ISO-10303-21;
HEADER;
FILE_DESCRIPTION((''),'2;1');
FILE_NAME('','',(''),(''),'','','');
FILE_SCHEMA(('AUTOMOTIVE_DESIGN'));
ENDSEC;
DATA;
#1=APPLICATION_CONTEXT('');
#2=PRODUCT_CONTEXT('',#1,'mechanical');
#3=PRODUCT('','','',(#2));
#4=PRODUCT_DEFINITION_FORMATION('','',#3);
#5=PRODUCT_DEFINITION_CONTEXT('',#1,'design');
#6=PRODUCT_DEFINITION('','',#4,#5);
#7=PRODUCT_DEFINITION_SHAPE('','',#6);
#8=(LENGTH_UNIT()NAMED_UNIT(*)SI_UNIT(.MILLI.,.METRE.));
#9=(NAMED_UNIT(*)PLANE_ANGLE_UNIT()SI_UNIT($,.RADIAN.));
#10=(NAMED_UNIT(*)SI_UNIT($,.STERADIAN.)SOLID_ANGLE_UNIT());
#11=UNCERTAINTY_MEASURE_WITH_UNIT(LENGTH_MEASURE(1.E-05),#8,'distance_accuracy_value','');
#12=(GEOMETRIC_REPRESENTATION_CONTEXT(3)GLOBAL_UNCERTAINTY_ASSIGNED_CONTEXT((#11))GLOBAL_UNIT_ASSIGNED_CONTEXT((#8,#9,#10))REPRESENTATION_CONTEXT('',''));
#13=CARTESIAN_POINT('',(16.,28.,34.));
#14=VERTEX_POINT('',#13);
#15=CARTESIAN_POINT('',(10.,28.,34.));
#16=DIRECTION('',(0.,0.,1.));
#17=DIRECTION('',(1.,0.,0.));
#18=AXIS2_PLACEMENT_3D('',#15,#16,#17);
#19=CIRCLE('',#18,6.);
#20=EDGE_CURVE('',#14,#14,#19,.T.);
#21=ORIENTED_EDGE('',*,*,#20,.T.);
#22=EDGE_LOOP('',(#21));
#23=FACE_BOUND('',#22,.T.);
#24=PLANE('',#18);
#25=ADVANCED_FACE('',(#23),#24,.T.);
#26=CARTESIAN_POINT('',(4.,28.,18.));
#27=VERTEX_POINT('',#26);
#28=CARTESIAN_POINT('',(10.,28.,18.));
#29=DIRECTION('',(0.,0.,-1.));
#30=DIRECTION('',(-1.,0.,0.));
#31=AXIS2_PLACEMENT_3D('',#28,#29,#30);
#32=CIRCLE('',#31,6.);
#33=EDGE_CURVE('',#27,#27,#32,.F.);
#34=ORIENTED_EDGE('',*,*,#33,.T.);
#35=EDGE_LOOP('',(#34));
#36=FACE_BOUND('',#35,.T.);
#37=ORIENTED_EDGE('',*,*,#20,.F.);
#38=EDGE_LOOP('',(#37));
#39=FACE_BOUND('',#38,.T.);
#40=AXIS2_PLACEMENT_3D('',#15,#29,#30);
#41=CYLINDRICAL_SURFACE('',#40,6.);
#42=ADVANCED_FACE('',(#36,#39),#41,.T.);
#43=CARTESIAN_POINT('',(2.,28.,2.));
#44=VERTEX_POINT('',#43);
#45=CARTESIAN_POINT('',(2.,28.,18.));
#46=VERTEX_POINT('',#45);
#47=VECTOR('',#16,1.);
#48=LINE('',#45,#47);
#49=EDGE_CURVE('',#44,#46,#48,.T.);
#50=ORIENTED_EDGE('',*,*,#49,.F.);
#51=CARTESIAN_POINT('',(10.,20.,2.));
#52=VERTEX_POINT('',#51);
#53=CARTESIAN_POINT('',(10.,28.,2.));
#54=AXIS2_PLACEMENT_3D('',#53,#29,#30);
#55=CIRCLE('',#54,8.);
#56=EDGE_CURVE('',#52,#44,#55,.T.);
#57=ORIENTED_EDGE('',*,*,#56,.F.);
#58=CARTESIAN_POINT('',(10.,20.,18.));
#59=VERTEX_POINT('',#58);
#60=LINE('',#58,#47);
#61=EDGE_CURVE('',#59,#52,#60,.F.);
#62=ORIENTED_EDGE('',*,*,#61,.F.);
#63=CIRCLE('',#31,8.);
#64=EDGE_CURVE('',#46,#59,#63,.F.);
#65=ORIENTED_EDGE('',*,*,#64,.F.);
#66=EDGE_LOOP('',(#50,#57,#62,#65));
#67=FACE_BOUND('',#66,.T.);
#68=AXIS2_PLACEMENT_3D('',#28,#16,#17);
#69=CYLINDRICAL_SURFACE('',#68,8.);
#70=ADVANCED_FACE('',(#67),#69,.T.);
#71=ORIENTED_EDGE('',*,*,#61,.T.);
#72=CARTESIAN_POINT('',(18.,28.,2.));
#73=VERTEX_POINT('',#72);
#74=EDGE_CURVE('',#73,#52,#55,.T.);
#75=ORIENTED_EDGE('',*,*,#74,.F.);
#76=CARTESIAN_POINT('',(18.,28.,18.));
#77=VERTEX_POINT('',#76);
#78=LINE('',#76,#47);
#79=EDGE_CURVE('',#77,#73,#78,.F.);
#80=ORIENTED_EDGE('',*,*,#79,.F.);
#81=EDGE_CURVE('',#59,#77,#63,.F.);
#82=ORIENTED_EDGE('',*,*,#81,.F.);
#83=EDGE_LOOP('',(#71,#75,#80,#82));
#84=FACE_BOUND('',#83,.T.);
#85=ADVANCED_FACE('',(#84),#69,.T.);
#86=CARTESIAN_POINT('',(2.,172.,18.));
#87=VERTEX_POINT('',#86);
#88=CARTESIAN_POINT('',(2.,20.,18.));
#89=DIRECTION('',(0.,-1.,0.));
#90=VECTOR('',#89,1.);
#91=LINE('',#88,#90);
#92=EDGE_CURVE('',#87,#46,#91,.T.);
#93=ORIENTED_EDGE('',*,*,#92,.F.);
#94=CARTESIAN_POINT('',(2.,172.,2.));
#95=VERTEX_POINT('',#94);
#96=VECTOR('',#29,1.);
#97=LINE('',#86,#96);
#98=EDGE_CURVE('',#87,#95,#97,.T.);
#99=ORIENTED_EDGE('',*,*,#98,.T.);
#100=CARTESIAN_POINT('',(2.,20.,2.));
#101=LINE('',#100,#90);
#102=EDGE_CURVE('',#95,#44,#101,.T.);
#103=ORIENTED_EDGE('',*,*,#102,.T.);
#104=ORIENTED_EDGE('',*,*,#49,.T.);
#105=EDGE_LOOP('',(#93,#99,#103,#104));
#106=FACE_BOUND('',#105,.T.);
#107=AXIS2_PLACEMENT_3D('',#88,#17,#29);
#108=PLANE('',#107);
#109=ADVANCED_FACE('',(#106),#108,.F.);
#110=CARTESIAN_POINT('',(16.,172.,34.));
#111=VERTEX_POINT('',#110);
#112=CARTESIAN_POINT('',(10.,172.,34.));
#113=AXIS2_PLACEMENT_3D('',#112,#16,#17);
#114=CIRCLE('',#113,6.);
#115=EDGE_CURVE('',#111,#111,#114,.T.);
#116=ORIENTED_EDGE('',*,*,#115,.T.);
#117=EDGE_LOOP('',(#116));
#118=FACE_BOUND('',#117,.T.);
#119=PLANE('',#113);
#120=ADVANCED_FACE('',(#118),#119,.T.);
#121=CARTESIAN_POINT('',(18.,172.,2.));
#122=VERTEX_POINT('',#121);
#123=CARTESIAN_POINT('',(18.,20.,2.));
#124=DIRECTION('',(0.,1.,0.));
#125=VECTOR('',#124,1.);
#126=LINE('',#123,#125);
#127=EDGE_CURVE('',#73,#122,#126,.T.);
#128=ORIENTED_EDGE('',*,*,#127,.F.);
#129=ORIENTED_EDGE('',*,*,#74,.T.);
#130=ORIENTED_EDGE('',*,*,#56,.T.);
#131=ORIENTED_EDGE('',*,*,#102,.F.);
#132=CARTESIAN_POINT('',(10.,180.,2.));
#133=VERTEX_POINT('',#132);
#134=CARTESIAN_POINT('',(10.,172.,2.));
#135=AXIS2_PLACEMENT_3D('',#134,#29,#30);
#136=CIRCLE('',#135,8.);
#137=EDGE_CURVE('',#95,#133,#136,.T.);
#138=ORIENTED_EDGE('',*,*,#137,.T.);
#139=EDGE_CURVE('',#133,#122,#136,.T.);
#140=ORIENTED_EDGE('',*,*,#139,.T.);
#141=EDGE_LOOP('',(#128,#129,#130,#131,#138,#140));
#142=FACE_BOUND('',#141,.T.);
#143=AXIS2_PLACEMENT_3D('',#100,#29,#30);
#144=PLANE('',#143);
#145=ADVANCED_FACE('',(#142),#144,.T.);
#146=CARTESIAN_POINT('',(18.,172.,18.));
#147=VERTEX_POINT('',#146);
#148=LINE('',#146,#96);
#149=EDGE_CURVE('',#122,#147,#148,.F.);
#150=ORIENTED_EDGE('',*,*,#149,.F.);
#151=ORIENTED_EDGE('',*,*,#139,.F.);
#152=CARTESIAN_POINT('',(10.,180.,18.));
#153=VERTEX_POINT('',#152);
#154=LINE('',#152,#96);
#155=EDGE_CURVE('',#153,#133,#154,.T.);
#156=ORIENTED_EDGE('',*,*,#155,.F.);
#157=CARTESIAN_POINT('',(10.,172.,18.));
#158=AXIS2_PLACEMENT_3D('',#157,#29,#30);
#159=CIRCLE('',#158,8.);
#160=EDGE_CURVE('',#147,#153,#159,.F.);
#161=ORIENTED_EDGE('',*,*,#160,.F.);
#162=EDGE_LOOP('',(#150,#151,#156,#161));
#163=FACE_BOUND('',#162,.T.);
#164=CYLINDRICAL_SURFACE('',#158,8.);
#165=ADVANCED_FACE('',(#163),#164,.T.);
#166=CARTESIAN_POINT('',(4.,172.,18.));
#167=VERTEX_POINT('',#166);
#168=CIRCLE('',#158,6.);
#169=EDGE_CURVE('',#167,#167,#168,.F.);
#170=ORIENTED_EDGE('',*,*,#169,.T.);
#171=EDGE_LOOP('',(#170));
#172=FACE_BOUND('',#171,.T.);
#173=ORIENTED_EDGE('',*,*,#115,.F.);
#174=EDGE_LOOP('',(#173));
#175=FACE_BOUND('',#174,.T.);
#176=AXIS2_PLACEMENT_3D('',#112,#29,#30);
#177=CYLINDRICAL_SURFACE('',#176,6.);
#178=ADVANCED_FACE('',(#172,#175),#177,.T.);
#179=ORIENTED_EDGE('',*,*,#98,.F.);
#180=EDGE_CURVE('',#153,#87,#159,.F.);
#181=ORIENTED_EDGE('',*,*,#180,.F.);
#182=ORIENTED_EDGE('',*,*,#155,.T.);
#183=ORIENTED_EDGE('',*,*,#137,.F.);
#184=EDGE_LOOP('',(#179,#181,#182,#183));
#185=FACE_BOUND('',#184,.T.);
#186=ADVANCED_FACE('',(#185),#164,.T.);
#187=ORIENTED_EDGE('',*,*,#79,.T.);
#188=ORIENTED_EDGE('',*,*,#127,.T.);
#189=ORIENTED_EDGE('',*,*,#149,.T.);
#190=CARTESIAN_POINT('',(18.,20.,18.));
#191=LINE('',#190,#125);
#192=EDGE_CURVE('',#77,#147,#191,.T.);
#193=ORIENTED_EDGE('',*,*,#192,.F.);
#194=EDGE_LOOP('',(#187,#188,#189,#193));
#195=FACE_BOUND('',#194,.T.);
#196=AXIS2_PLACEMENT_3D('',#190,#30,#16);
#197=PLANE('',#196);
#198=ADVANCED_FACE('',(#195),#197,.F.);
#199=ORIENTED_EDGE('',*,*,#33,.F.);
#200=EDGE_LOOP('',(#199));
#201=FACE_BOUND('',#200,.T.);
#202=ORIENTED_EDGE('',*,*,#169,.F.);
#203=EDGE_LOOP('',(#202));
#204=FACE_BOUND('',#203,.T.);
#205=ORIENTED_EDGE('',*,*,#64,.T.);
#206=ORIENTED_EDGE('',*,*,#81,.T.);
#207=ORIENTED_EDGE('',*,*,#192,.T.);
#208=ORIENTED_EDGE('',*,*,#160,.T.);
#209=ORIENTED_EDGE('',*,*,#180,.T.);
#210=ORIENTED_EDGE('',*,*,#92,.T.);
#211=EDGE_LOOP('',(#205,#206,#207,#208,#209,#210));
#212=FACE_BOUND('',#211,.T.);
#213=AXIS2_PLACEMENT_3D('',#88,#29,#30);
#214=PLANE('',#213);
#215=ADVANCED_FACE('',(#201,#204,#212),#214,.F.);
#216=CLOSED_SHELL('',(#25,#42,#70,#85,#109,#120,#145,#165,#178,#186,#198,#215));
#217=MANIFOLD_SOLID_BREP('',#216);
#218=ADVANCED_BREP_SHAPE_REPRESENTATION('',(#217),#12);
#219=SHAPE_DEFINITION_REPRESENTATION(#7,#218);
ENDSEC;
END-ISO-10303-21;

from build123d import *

# Parameters (mm, degrees)
SKETCH1_W           = 20
SKETCH1_H           = 200
BOSS_EXTRUDE1_DEPTH = 20
FILLET1_R           = 10
FILLET2_R           = 10
FILLET3_R           = 10
FILLET4_R           = 10
SCALE1_SCALE        = 0.8
SKETCH2_R           = 6
BOSS_EXTRUDE3_DEPTH = 16


with BuildPart() as part:
    # Sketch1 → Boss-Extrude1 (new body)
    with BuildSketch(Plane.XY):
        with Locations((10, 100)):
            Rectangle(SKETCH1_W, SKETCH1_H)
    extrude(amount=BOSS_EXTRUDE1_DEPTH)

    # Fillet1
    fillet1_edges = [part.edges().sort_by_distance(p)[0] for p in [
        (20, 200, 10),
    ]]
    fillet(fillet1_edges, radius=FILLET1_R)

    # Fillet2
    fillet2_edges = [part.edges().sort_by_distance(p)[0] for p in [
        (0, 200, 10),
    ]]
    fillet(fillet2_edges, radius=FILLET2_R - 0.0001)  # a hair under: the kernel refuses the full size

    # Fillet3
    fillet3_edges = [part.edges().sort_by_distance(p)[0] for p in [
        (0, 0, 10),
    ]]
    fillet(fillet3_edges, radius=FILLET3_R)

    # Fillet4
    fillet4_edges = [part.edges().sort_by_distance(p)[0] for p in [
        (20, 0, 10),
    ]]
    fillet(fillet4_edges, radius=FILLET4_R - 0.0001)  # a hair under: the kernel refuses the full size


with BuildPart() as part_1:
    # Scale1: scaled about (10, 100, 10)
    add(part.part.scale(SCALE1_SCALE).moved(Location((2, 20, 2))))

    # Sketch2 → Boss-Extrude3 (add)
    with BuildSketch(Plane.XY.offset(18)):
        with Locations(Location((10, 172, 0), (0, 0, 180))):
            Circle(SKETCH2_R)
        with Locations(Location((10, 28, 0), (0, 0, 180))):
            Circle(SKETCH2_R)
    extrude(amount=BOSS_EXTRUDE3_DEPTH)


solid = part_1.part
